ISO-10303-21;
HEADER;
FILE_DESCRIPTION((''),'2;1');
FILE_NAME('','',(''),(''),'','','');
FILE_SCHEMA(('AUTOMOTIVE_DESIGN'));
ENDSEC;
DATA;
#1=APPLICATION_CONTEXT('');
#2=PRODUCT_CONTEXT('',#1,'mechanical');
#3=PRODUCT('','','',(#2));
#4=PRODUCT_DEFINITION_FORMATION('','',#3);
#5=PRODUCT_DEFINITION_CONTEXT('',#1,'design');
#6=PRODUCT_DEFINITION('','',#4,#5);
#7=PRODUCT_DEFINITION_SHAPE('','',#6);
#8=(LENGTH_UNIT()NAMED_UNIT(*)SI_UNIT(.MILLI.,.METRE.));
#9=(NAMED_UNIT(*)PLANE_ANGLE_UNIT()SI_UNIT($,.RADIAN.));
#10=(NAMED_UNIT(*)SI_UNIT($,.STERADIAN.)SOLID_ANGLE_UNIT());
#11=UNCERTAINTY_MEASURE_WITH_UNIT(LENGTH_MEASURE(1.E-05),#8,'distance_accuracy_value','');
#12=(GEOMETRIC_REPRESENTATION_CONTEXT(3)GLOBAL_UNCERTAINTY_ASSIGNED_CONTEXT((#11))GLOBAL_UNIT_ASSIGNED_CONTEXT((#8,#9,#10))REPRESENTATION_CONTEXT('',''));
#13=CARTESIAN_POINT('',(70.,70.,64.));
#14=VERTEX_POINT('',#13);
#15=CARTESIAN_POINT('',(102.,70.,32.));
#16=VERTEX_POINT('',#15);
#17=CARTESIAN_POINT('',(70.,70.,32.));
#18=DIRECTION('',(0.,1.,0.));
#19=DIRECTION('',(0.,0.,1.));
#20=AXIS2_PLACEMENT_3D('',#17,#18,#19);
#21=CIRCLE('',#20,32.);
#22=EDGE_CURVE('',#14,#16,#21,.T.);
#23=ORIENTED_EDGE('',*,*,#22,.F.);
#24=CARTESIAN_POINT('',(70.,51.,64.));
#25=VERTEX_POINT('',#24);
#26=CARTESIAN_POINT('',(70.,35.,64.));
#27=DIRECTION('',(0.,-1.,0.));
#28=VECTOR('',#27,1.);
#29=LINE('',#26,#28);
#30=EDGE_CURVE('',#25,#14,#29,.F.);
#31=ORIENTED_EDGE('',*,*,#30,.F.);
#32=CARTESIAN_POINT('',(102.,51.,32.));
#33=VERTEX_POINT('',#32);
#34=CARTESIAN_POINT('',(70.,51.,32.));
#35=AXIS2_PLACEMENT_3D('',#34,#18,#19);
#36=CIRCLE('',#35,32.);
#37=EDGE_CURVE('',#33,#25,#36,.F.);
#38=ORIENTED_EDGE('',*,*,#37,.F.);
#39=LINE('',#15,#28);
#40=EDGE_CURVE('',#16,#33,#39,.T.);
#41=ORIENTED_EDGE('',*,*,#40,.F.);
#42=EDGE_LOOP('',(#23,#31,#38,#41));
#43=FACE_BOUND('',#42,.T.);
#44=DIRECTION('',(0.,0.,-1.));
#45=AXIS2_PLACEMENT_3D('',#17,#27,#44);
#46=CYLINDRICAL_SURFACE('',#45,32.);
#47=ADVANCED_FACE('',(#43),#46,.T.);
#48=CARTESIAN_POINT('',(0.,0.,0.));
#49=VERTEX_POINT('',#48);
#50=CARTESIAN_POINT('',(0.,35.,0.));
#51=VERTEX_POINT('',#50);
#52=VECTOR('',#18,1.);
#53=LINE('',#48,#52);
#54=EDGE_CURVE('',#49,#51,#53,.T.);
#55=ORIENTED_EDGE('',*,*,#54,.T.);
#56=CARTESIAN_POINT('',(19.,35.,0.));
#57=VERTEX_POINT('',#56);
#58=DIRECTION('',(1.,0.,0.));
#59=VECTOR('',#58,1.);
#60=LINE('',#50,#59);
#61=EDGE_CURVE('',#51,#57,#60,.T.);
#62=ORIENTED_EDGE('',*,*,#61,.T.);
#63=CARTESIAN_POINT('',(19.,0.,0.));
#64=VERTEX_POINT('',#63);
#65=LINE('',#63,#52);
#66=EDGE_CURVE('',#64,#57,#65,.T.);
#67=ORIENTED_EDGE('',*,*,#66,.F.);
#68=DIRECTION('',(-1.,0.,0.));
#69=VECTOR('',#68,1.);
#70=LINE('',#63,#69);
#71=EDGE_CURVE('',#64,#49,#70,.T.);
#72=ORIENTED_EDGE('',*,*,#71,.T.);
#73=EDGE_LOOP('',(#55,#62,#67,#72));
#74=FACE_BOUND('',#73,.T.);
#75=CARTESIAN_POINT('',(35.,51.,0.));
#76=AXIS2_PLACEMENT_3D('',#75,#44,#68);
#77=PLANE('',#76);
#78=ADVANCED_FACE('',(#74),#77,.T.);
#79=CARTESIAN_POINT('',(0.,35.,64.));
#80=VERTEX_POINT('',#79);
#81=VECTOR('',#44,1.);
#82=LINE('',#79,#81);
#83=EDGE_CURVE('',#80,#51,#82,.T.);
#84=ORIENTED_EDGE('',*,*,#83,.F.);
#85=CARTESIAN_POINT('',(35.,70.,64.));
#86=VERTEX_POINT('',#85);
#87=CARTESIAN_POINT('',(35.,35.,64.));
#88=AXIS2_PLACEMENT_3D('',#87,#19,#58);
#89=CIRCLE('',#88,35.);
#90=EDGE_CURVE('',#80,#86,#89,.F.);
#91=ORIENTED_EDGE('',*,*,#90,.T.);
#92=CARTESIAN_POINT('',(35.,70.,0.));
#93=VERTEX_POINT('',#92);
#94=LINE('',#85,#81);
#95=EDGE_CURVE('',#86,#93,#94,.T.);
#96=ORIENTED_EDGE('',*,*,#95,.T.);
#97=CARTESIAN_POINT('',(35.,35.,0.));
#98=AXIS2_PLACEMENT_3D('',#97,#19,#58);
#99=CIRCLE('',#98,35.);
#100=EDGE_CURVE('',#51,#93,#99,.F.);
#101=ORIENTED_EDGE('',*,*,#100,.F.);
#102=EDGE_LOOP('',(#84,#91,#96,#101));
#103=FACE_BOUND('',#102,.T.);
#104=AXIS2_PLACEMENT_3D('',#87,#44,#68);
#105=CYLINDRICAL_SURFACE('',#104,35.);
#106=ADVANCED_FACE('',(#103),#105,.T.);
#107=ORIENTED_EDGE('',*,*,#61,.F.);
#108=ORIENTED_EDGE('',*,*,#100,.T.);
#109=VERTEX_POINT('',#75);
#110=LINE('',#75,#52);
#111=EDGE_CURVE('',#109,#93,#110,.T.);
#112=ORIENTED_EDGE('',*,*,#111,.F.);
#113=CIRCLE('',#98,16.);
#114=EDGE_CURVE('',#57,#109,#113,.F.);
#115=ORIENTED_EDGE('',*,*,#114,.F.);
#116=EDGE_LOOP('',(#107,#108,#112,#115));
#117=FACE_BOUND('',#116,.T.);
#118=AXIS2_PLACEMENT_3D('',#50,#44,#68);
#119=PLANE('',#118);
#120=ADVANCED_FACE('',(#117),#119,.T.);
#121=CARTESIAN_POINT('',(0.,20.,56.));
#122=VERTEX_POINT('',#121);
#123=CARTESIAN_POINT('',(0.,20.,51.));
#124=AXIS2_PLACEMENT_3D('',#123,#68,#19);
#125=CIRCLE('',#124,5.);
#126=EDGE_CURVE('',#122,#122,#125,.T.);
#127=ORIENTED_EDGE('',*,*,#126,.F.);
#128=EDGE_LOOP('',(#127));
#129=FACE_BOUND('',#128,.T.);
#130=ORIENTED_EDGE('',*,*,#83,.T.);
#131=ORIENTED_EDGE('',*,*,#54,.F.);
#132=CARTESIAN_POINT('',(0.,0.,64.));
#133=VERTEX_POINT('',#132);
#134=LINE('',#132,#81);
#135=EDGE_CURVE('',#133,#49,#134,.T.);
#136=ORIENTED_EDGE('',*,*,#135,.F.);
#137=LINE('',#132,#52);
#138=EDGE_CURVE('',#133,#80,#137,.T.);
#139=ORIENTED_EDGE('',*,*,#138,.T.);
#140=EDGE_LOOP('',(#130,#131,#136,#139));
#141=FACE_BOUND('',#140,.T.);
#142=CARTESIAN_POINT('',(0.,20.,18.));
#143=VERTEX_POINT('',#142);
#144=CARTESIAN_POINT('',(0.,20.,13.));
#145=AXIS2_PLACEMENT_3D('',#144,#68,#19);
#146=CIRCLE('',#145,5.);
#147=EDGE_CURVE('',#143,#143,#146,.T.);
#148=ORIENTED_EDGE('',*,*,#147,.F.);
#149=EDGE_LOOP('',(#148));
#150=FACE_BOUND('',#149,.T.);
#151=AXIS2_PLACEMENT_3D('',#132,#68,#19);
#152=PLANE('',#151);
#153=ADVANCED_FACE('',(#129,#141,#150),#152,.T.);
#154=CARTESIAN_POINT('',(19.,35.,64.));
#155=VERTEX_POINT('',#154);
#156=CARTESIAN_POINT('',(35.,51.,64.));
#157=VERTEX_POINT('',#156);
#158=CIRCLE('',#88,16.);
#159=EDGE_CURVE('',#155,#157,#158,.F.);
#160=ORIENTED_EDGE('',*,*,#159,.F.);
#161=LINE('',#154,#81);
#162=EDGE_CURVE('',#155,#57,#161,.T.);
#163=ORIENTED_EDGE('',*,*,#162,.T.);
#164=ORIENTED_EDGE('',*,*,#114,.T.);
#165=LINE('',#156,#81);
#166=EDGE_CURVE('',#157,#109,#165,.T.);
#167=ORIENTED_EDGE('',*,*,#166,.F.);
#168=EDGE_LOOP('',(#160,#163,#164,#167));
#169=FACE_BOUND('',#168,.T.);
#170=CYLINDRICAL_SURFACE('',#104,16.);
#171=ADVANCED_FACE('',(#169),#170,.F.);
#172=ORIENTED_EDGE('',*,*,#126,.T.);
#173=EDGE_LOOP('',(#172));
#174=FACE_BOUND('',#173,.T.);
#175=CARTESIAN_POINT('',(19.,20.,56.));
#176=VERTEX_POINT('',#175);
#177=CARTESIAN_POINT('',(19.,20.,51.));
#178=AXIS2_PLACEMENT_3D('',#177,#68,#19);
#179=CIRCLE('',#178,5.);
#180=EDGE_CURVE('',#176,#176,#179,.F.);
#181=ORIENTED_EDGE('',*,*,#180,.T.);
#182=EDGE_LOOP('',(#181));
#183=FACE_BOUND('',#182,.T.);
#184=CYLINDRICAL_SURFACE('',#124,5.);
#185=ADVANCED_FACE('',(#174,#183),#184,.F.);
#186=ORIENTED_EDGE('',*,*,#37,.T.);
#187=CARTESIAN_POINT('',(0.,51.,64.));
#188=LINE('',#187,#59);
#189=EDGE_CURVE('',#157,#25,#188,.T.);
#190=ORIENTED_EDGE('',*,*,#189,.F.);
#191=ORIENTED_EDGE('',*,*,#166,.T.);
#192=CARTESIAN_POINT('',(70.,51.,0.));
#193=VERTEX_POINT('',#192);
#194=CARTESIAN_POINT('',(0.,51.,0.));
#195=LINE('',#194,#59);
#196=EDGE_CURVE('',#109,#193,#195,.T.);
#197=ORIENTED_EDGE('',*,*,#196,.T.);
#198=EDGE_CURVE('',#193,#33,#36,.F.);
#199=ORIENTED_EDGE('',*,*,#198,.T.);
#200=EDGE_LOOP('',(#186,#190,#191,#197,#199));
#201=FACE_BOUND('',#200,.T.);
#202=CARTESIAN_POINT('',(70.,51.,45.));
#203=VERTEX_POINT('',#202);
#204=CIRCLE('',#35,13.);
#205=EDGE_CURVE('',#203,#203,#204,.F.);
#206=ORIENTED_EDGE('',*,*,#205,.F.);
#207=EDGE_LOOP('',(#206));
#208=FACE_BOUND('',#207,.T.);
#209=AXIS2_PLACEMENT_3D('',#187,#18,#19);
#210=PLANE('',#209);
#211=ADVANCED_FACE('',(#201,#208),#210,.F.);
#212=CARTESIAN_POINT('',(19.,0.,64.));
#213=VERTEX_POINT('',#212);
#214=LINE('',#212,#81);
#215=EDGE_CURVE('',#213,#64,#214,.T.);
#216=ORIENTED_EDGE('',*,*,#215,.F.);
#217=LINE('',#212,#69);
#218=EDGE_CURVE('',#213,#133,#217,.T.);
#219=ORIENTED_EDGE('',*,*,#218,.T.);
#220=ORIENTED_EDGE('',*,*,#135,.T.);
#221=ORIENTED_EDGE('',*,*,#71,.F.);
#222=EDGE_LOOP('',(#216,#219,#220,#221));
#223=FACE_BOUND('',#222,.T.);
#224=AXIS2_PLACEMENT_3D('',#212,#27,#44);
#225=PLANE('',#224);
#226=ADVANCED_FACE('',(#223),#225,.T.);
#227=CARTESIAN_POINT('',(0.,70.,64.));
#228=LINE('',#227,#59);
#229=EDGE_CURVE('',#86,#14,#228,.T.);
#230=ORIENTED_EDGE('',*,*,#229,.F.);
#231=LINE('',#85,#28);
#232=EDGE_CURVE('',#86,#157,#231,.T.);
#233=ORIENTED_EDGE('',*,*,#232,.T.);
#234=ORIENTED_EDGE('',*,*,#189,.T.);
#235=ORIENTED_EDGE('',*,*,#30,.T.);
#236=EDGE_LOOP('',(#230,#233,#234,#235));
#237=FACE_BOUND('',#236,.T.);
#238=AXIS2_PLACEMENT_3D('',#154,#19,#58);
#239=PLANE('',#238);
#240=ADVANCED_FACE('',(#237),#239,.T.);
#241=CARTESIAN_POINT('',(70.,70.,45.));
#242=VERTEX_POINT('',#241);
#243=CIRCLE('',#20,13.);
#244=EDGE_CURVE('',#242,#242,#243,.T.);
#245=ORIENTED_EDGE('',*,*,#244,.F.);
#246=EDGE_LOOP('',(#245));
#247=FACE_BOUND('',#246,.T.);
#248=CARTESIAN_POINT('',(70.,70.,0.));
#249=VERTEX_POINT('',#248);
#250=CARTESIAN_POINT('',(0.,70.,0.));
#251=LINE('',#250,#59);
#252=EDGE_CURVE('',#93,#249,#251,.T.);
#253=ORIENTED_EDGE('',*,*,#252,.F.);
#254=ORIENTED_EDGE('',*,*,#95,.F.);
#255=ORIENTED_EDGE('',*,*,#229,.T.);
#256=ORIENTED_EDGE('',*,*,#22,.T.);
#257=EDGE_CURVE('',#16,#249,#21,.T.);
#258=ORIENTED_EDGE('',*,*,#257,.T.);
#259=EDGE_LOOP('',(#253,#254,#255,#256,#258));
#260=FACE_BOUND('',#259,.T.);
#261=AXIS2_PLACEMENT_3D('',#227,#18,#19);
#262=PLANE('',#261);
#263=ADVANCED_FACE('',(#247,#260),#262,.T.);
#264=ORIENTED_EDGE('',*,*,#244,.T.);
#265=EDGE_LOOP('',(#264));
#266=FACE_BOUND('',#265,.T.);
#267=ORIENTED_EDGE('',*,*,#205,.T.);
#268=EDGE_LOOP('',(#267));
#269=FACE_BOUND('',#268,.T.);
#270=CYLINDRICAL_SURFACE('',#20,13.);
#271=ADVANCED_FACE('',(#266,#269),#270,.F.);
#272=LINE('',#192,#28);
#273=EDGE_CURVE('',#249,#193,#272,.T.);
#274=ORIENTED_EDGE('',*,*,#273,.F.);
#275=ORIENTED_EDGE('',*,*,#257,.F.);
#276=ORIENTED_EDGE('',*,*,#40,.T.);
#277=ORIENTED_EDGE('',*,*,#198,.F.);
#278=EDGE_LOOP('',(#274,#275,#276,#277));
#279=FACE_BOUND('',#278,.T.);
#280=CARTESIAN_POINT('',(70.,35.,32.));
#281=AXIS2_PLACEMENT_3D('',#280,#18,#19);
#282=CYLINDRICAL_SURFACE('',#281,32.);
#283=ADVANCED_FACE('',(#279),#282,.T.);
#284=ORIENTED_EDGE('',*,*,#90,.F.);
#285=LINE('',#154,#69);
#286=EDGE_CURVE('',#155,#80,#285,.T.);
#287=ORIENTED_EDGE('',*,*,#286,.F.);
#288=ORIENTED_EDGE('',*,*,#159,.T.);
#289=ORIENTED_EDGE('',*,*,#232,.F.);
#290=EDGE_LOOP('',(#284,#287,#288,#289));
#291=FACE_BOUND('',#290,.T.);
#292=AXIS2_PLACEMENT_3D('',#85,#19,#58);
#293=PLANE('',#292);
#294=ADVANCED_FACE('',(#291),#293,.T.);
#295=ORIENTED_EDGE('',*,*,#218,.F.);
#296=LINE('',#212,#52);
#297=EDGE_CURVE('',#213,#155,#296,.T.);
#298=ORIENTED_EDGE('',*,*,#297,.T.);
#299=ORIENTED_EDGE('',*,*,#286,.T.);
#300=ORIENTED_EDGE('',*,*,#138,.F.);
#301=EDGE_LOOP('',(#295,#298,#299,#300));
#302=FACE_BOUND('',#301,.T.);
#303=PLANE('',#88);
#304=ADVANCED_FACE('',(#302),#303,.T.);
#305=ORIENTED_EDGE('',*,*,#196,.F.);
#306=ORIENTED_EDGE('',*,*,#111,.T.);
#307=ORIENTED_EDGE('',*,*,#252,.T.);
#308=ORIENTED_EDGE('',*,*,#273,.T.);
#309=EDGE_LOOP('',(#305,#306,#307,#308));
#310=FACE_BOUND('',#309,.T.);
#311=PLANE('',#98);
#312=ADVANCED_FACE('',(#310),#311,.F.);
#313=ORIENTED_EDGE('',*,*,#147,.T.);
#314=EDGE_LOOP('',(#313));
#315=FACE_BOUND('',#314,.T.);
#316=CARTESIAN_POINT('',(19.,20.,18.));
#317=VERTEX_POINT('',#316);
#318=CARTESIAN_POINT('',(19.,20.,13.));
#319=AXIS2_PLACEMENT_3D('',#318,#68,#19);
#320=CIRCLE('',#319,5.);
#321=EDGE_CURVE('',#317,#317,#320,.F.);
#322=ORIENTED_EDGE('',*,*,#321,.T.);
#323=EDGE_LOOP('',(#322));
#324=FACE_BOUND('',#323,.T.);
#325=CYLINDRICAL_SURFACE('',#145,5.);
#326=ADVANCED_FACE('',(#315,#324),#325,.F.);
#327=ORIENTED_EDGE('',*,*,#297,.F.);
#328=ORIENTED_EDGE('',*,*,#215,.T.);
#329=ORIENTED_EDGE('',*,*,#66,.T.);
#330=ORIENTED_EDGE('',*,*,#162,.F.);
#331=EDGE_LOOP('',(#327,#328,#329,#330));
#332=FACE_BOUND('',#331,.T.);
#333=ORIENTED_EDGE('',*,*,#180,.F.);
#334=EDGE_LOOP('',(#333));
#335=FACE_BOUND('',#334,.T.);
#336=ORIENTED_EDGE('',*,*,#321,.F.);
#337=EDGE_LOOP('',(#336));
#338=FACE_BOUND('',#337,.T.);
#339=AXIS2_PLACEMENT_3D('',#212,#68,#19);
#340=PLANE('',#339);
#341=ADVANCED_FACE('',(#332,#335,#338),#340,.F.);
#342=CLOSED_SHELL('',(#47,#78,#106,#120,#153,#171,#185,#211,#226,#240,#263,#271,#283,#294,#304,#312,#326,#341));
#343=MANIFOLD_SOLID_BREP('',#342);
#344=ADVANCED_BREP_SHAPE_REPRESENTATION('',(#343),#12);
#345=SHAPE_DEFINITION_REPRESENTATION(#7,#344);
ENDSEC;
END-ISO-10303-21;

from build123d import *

# Parameters (mm, degrees)
BASE_FLANGE1_DEPTH         = 64
BREAK_CORNER1_START        = 51
BREAK_CORNER1_DEPTH        = 19
F_9_0_9_DIAMETER_HOLE1_D   = 26
F_10_0_10_DIAMETER_HOLE1_D = 10


# Read off the part's stored shape, not the designer's step: Break-Corner1
# Sheet-metal steps are written as plain solids
with BuildPart() as part:
    # Sketch1 → Base-Flange1 (new body)
    with BuildSketch(Plane.XY):
        with BuildLine():
            Line((0, 0), (0, 35))
            ThreePointArc((0, 35), (10.251262658, 59.748737342), (35, 70))
            Line((35, 70), (102, 70))
            Line((102, 70), (102, 51))
            Line((102, 51), (35, 51))
            ThreePointArc((35, 51), (23.686291501, 46.313708499), (19, 35))
            Line((19, 35), (19, 0))
            Line((19, 0), (0, 0))
        make_face()
    extrude(amount=BASE_FLANGE1_DEPTH)

    # Break-Corner1 outline → Break-Corner1 (cut)
    with BuildSketch(Plane(origin=(0, 0, 0), x_dir=(1, 0, 0), z_dir=(0, 1, 0)).offset(BREAK_CORNER1_START)):
        with BuildLine():
            Line((102, -64), (102, -32))
            ThreePointArc((102, -32), (92.627416998, -54.627416998), (70, -64))
            Line((70, -64), (102, -64))
        make_face()
        with BuildLine():
            ThreePointArc((70, 0), (92.627416998, -9.372583002), (102, -32))
            Line((102, -32), (102, 0))
            Line((102, 0), (70, 0))
        make_face()
    extrude(amount=BREAK_CORNER1_DEPTH, mode=Mode.SUBTRACT)

    # Ø9.0 (9) Diameter Hole1 (through all)
    with Locations(Plane(origin=(70, 70, 32), x_dir=(0, 0, 1), z_dir=(0, 1, 0))):
        with Locations((0, 0)):
            Hole(F_9_0_9_DIAMETER_HOLE1_D / 2)

    # Ø10.0 (10) Diameter Hole1 (through all)
    with Locations(Plane.ZY):
        with Locations((13, 20), (51, 20)):
            Hole(F_10_0_10_DIAMETER_HOLE1_D / 2)


solid = part.part
